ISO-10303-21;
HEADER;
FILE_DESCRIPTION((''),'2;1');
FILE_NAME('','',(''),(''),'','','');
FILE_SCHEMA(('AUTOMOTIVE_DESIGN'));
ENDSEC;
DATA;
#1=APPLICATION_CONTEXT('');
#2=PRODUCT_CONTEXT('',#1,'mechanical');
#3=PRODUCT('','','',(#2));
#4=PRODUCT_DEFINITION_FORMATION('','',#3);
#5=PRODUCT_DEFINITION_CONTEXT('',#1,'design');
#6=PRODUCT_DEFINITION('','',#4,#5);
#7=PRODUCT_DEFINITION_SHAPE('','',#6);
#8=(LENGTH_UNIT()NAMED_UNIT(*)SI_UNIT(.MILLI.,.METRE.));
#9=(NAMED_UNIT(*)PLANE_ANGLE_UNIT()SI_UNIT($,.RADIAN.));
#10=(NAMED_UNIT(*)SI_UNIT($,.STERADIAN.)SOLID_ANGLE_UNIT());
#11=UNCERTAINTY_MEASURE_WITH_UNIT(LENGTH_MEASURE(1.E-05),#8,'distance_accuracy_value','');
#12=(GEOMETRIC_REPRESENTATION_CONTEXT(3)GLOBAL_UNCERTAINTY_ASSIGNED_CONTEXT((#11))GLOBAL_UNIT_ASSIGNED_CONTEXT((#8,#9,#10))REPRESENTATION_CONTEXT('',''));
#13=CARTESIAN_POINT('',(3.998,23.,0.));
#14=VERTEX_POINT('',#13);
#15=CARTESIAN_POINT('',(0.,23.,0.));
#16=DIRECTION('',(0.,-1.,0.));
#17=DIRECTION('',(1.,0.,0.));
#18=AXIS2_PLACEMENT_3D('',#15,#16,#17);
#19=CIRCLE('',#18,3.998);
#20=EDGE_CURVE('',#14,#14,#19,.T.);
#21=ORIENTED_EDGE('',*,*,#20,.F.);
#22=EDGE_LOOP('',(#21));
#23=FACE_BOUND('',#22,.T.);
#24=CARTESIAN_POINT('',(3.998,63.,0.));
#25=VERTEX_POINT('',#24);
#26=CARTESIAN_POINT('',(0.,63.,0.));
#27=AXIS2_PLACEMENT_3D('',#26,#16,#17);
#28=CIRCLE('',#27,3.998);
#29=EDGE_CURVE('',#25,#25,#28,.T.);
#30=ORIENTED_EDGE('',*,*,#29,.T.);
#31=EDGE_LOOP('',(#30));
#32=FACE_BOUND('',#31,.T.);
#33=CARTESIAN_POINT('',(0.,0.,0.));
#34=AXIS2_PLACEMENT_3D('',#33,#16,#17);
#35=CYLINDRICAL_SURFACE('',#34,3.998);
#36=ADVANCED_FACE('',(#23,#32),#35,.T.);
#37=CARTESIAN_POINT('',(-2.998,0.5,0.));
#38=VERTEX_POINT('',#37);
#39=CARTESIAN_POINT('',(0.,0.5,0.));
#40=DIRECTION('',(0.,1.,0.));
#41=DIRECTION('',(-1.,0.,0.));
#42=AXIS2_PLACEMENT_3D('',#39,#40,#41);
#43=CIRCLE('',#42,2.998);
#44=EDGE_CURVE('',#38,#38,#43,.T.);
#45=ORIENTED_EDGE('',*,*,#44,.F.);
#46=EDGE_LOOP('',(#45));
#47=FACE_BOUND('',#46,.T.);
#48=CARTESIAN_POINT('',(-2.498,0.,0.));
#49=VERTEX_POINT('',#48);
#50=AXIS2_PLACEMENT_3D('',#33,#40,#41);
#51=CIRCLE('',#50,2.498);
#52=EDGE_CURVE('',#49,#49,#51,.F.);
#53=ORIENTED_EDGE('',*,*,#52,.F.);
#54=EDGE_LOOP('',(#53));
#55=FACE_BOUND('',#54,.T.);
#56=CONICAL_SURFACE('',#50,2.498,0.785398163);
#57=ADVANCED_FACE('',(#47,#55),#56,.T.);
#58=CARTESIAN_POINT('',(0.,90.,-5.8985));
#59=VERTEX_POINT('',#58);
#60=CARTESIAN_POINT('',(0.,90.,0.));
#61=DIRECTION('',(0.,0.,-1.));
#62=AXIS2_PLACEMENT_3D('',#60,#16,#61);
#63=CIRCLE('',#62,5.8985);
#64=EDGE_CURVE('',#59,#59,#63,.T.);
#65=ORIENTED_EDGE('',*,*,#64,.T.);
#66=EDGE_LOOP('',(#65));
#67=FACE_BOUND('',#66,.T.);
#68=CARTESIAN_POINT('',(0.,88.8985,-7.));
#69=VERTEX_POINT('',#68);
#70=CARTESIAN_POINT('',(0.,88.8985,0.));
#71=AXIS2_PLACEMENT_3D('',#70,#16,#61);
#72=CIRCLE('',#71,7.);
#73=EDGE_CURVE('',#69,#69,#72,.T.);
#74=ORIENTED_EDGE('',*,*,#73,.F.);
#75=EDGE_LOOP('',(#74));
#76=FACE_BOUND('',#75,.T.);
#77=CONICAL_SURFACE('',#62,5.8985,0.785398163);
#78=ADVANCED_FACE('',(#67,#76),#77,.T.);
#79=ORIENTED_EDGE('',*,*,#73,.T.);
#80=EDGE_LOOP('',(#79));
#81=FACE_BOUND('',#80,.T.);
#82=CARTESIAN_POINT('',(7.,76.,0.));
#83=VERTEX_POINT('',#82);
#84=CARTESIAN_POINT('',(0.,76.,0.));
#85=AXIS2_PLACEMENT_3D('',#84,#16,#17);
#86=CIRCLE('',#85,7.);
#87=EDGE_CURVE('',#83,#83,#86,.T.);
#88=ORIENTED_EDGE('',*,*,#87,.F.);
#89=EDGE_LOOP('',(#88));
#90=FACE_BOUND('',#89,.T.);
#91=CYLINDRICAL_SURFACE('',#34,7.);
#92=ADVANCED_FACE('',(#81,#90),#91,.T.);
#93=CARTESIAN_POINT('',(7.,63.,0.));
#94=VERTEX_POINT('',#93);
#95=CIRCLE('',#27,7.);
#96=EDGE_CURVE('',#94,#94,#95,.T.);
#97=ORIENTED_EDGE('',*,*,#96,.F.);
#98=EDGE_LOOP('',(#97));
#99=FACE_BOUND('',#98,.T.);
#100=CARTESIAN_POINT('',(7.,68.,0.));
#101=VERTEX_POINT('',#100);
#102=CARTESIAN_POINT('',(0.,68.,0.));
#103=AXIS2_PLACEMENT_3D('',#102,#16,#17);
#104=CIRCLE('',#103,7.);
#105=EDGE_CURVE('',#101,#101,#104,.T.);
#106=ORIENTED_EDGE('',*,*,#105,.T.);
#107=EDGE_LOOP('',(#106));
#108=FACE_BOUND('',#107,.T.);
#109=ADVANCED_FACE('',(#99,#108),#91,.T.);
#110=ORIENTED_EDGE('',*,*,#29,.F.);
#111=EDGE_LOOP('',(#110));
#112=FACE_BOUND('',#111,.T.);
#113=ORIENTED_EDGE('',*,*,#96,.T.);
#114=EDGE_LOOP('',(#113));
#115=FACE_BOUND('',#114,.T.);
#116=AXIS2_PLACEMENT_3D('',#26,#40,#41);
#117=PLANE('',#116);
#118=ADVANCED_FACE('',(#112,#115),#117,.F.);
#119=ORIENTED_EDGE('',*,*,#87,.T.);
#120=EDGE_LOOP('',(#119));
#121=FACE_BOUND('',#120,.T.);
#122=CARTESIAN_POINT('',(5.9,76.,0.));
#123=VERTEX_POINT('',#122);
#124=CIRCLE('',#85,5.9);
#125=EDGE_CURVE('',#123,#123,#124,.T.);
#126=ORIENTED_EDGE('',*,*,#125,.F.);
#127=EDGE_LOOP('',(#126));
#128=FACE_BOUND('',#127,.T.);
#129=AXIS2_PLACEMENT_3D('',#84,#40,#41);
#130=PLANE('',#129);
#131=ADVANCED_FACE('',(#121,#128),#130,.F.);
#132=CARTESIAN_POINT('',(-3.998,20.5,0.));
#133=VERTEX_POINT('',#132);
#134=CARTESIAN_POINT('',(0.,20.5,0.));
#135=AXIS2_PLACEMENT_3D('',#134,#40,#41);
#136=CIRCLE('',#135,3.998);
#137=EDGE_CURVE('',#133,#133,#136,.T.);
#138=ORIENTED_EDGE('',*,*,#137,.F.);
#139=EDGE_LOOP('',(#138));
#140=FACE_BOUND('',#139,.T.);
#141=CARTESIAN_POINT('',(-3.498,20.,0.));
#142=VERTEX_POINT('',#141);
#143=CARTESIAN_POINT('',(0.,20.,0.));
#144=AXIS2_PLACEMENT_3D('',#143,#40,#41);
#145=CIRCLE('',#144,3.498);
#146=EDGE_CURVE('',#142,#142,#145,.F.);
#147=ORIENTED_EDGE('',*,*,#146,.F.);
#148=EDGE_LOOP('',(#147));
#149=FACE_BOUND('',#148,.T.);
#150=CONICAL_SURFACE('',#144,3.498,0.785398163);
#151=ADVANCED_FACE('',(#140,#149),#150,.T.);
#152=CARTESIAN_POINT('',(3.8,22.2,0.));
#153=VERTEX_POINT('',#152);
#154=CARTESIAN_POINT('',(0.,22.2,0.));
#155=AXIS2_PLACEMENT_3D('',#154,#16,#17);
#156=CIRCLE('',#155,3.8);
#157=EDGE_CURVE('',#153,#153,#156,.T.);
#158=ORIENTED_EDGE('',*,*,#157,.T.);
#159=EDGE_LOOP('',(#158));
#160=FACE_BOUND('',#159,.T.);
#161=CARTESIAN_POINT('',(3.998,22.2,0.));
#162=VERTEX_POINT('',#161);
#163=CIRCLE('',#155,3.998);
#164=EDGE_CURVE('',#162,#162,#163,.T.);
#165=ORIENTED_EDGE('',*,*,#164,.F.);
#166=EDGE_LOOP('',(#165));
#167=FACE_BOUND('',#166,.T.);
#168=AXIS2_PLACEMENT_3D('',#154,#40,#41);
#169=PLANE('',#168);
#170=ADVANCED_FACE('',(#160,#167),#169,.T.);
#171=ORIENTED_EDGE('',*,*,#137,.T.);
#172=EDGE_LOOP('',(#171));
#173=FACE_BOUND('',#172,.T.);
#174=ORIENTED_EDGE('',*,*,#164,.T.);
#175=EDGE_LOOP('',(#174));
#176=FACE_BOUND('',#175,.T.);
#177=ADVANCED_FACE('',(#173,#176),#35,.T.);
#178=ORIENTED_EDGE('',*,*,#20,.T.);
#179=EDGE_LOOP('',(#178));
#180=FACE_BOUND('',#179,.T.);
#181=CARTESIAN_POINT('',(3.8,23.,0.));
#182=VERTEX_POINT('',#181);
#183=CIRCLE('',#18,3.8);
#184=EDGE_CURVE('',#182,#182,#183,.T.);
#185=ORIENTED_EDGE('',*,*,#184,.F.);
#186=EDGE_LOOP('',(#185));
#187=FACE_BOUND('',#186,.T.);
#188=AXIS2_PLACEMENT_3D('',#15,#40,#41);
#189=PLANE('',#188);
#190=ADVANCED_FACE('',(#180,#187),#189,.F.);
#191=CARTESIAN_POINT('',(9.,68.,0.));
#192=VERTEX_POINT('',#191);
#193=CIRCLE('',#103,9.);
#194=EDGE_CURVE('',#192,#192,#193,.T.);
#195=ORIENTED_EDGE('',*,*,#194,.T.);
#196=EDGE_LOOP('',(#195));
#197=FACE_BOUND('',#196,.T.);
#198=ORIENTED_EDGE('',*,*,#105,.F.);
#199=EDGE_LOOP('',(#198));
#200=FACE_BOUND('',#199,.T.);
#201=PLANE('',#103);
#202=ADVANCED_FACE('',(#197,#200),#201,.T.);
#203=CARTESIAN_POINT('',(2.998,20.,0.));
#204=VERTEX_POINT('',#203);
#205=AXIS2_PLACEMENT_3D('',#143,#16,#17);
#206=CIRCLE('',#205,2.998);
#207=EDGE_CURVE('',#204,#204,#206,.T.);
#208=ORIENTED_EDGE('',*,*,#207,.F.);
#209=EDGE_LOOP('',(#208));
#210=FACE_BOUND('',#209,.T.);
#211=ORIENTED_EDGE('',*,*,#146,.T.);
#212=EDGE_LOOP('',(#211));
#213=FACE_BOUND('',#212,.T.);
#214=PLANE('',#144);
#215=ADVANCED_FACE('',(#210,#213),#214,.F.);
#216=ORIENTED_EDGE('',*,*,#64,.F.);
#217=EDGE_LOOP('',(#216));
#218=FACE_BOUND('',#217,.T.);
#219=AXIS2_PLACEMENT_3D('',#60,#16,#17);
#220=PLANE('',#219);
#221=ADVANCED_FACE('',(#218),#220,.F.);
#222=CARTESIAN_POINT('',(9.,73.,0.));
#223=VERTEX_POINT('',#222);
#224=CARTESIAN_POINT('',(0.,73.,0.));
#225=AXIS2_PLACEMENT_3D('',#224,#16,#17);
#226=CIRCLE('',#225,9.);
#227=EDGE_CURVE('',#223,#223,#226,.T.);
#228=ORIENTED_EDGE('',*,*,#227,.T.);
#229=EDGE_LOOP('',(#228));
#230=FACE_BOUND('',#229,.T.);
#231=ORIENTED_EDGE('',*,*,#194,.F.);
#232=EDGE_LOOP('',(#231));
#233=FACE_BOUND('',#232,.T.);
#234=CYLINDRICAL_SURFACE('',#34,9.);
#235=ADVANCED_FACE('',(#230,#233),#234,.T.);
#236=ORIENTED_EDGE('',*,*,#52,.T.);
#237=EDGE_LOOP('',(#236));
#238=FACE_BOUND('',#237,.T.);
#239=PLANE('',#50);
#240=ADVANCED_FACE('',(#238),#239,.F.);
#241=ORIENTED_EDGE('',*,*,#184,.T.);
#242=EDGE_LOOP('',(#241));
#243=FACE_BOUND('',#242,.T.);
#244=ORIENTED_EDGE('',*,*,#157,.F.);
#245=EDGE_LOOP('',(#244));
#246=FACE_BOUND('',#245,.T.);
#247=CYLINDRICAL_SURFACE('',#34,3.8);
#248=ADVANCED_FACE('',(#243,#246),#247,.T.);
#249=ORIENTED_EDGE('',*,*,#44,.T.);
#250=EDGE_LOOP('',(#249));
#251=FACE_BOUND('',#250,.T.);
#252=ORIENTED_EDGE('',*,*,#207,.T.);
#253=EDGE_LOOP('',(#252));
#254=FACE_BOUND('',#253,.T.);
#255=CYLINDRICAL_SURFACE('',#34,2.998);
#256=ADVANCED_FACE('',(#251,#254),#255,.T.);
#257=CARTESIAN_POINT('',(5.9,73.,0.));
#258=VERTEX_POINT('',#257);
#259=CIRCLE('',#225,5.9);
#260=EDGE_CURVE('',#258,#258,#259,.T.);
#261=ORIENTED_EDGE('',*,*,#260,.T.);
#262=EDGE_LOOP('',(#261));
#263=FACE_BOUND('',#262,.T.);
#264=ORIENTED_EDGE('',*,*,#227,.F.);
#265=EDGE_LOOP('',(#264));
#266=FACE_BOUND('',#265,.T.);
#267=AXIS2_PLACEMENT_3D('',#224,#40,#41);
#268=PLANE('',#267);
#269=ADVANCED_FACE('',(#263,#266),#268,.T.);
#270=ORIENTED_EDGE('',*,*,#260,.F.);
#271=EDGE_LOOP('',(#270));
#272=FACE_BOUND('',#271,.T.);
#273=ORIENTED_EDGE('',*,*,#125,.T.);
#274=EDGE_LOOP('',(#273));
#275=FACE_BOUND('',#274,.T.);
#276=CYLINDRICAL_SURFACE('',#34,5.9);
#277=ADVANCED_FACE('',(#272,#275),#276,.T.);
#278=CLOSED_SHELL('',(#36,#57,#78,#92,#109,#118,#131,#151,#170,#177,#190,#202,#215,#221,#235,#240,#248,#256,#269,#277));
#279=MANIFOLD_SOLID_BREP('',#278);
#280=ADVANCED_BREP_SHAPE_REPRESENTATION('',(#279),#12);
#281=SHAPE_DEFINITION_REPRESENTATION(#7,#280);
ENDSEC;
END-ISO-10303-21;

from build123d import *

# Parameters (mm, degrees)
CROQUIS1_W    = 2
CROQUIS1_H    = 5
CHAFL_N2_SIZE = 0.5


# Read off the part's stored shape, not the designer's step: M14 Roscas Standard Taladro1
with BuildPart() as part:
    # Croquis1 → Revolución1 (revolve)
    with BuildSketch(Plane.XY):
        Polygon((0, 90), (0, 0), (2.998, 0), (2.998, 20), (3.998, 20), (3.998, 22.2), (3.8, 22.2), (3.8, 23), (3.998, 23), (3.998, 63), (7, 63), (7, 68), (7, 73), (5.9, 73), (5.9, 76), (7, 76), (7, 90), align=None)
        with Locations((8, 70.5)):
            Rectangle(CROQUIS1_W, CROQUIS1_H)
    revolve(axis=Axis((0, 0, 0), (0, 1, 0)))

    # M14 Roscas Standard Taladro1 outline → M14 Roscas Standard Taladro1 (revolve, cut)
    with BuildSketch(Plane.XY):
        Polygon((7, 90), (5.8985, 90), (7, 88.8985), align=None)
    revolve(axis=Axis((0, 0, 0), (0, 1, 0)), mode=Mode.SUBTRACT)

    # Chaflán2
    chafl_n2_edges = [part.edges().sort_by_distance(p)[0] for p in [
        (-3.998, 20, 0),
        (-2.998, 0, 0),
    ]]
    chamfer(chafl_n2_edges, length=CHAFL_N2_SIZE)


solid = part.part
